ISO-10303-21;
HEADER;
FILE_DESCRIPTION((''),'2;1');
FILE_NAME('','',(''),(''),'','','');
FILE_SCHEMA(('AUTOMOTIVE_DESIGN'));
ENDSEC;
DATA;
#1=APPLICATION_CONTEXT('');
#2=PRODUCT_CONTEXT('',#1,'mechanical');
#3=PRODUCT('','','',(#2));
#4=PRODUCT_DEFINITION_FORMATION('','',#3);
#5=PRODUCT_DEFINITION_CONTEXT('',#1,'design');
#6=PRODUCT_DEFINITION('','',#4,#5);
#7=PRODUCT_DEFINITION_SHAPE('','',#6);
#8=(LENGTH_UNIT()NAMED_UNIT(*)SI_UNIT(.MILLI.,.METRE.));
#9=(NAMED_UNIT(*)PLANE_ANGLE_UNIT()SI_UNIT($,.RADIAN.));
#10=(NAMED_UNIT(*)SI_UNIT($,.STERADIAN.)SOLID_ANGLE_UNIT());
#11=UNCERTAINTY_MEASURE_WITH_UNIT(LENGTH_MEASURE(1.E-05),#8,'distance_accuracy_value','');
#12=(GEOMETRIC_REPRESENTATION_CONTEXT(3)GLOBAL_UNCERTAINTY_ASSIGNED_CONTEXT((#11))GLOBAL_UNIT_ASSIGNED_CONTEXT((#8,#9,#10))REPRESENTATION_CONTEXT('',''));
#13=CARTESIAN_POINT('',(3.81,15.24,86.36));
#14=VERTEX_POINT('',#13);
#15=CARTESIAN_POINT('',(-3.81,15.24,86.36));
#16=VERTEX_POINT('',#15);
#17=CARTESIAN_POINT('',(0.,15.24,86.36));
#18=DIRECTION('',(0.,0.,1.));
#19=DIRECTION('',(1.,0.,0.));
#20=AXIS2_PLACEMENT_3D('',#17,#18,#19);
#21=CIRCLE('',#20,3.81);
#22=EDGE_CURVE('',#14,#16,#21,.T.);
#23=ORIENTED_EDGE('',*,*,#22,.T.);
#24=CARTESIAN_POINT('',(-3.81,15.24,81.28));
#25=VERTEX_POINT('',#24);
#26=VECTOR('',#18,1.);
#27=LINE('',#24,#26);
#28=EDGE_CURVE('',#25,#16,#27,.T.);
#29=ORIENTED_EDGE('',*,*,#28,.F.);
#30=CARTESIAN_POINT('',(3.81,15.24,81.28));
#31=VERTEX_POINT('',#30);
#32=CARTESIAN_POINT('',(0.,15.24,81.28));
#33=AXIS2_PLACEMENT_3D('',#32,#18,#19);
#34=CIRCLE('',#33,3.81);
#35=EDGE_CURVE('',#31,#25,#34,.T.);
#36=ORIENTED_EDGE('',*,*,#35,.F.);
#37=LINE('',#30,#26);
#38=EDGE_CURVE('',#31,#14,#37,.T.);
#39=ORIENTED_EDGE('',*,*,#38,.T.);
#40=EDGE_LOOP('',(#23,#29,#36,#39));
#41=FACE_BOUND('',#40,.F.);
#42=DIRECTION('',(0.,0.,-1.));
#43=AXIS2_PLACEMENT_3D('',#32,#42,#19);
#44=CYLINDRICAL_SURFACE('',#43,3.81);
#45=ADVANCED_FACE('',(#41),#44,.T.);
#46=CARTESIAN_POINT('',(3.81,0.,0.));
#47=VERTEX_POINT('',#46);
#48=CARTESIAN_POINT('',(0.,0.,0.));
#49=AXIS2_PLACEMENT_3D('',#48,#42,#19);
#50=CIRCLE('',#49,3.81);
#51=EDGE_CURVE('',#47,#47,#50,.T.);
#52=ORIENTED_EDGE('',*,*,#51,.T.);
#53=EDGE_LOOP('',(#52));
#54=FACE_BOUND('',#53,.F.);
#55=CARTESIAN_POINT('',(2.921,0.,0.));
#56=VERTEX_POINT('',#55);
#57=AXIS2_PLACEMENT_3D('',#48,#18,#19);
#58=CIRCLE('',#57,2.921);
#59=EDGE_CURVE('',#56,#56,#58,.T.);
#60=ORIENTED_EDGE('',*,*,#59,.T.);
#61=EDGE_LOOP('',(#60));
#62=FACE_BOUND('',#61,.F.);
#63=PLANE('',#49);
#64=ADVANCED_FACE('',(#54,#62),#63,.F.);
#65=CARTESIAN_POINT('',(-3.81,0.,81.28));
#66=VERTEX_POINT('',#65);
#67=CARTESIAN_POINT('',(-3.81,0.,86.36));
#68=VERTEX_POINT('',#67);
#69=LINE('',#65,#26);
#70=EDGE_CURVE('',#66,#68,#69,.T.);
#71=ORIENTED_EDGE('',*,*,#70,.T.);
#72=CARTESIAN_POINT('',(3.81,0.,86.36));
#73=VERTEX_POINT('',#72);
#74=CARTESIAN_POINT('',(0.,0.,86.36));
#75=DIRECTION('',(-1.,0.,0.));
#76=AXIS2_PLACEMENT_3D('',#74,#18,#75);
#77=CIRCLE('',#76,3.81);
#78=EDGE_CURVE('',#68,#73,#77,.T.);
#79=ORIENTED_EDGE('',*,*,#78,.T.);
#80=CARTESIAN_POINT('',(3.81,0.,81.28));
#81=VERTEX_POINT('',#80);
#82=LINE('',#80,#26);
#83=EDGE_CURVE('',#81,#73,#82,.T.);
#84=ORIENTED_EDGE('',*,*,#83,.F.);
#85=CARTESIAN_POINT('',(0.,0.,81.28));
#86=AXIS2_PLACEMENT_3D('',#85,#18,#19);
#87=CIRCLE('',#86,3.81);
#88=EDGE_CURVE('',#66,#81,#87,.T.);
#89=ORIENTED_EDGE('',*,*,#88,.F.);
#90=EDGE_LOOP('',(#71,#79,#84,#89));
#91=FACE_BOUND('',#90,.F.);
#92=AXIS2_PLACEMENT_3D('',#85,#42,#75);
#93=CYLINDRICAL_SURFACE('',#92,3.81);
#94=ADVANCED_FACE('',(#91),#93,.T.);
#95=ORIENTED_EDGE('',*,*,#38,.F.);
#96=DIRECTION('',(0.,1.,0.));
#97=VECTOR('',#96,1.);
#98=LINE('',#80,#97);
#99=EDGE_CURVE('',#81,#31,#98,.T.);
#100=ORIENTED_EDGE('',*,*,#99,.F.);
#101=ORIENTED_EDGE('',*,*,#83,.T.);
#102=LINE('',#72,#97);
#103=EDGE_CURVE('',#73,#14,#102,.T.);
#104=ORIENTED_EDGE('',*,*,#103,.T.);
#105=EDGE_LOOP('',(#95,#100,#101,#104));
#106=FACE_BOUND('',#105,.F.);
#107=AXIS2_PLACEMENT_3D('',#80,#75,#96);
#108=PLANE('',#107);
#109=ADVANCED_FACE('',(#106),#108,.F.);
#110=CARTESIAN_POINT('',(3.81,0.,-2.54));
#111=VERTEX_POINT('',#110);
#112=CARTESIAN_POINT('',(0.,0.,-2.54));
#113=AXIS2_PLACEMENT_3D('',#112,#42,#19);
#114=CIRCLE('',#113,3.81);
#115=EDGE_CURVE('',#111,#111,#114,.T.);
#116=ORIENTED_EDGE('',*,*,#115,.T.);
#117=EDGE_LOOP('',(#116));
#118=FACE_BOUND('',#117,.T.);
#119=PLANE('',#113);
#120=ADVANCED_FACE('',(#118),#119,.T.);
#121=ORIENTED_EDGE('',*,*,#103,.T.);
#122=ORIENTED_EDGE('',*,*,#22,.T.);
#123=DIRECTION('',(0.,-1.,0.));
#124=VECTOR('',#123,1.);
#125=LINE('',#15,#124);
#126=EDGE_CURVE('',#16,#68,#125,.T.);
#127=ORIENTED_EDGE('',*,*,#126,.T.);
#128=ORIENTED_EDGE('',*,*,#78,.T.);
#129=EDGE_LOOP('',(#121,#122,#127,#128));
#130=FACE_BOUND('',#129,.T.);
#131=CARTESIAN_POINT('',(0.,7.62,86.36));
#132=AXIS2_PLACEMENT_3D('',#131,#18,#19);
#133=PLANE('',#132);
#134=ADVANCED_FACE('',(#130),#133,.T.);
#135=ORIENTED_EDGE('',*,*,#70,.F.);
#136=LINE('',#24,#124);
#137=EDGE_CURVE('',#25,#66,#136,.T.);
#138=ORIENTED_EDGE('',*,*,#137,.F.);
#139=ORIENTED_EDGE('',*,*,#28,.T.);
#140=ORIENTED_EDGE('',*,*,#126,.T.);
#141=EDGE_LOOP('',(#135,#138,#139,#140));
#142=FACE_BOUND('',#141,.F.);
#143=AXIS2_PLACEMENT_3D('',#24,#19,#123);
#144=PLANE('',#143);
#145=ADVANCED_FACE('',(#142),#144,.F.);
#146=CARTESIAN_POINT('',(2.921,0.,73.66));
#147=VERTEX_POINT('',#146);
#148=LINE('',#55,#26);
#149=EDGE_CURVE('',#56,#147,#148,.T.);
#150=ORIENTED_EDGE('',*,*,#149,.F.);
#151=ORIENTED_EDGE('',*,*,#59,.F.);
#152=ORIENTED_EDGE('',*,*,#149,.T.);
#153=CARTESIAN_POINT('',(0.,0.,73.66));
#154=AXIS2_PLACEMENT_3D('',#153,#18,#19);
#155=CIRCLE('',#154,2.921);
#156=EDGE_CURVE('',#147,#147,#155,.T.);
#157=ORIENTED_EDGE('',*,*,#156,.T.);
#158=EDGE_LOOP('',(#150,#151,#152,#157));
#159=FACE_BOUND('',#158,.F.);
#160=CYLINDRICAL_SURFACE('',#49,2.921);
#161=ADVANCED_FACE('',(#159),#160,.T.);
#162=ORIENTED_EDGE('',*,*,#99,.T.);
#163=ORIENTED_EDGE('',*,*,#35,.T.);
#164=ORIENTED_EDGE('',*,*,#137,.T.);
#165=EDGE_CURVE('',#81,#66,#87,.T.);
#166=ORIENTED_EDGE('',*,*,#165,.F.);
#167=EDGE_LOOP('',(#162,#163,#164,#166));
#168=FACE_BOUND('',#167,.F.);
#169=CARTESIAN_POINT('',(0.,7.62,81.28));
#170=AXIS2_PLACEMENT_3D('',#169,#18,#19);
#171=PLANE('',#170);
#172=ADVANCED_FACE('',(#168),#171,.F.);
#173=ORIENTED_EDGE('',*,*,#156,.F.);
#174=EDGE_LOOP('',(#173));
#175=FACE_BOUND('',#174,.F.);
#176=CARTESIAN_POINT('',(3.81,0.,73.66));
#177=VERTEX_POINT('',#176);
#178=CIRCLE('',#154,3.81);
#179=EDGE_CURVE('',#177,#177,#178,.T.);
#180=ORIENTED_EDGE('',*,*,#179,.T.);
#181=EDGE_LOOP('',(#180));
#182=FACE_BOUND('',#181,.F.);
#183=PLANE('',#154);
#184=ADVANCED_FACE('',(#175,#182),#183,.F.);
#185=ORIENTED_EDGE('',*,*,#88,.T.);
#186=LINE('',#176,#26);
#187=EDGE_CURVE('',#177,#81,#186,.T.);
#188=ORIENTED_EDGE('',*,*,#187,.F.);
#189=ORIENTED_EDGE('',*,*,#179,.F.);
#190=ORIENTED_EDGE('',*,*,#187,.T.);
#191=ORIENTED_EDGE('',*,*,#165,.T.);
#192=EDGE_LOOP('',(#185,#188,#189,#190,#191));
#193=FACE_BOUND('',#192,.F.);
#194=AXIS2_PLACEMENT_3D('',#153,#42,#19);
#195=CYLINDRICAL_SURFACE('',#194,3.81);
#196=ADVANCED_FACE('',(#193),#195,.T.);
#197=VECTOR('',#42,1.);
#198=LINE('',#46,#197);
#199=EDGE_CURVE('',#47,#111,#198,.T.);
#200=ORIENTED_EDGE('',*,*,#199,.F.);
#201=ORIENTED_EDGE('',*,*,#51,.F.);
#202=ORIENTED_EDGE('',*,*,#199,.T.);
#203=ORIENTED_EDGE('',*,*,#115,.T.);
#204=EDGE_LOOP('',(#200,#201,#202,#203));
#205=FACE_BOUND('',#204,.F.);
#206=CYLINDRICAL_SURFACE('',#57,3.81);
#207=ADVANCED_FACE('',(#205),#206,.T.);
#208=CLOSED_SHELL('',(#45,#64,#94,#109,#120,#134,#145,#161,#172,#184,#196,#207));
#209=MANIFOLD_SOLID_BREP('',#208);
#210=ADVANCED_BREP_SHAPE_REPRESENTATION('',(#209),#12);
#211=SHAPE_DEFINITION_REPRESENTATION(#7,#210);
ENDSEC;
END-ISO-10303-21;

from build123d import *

# Parameters (mm, degrees)
F0_R     = 2.921
F1_DEPTH = 73.66
F2_R     = 3.81
F2_R_2   = 2.921
F3_DEPTH = 2.54
F4_R     = 3.81
F5_DEPTH = 7.62
F7_DEPTH = 5.08


with BuildPart() as f1:
    # F0 (on Top) → F1 (new body)
    with BuildSketch(Plane.XY):
        Circle(F0_R)
    extrude(amount=F1_DEPTH)

    # F2 (on face) → F3 (join)
    with BuildSketch(Plane(origin=(0, 0, 0), x_dir=(1, 0, 0), z_dir=(0, 0, -1))):
        Circle(F2_R)
        Circle(F2_R_2, mode=Mode.SUBTRACT)
        Circle(F2_R_2)
    extrude(amount=F3_DEPTH)

    # F4 (on face) → F5 (join)
    with BuildSketch(Plane.XY.offset(73.66)):
        Circle(F4_R)
    extrude(amount=F5_DEPTH)

    # F6 (on face) → F7 (join)
    with BuildSketch(Plane.XY.offset(81.28)):
        with BuildLine():
            ThreePointArc((-3.81, 0), (0, 3.81), (3.81, 0))
            Line((3.81, 0), (3.81, 15.24))
            ThreePointArc((3.81, 15.24), (0, 11.43), (-3.81, 15.24))
            Line((-3.81, 15.24), (-3.81, 0))
        make_face()
        with BuildLine():
            Line((-3.81, 0), (3.81, 0))
            ThreePointArc((3.81, 0), (0, 3.81), (-3.81, 0))
        make_face()
        with BuildLine():
            ThreePointArc((-3.81, 0), (0, -3.81), (3.81, 0))
            Line((3.81, 0), (-3.81, 0))
        make_face()
        with BuildLine():
            Line((-3.81, 15.24), (3.81, 15.24))
            ThreePointArc((3.81, 15.24), (0, 19.05), (-3.81, 15.24))
        make_face()
        with BuildLine():
            ThreePointArc((-3.81, 15.24), (0, 11.43), (3.81, 15.24))
            Line((3.81, 15.24), (-3.81, 15.24))
        make_face()
    extrude(amount=F7_DEPTH)


solid = f1.part
